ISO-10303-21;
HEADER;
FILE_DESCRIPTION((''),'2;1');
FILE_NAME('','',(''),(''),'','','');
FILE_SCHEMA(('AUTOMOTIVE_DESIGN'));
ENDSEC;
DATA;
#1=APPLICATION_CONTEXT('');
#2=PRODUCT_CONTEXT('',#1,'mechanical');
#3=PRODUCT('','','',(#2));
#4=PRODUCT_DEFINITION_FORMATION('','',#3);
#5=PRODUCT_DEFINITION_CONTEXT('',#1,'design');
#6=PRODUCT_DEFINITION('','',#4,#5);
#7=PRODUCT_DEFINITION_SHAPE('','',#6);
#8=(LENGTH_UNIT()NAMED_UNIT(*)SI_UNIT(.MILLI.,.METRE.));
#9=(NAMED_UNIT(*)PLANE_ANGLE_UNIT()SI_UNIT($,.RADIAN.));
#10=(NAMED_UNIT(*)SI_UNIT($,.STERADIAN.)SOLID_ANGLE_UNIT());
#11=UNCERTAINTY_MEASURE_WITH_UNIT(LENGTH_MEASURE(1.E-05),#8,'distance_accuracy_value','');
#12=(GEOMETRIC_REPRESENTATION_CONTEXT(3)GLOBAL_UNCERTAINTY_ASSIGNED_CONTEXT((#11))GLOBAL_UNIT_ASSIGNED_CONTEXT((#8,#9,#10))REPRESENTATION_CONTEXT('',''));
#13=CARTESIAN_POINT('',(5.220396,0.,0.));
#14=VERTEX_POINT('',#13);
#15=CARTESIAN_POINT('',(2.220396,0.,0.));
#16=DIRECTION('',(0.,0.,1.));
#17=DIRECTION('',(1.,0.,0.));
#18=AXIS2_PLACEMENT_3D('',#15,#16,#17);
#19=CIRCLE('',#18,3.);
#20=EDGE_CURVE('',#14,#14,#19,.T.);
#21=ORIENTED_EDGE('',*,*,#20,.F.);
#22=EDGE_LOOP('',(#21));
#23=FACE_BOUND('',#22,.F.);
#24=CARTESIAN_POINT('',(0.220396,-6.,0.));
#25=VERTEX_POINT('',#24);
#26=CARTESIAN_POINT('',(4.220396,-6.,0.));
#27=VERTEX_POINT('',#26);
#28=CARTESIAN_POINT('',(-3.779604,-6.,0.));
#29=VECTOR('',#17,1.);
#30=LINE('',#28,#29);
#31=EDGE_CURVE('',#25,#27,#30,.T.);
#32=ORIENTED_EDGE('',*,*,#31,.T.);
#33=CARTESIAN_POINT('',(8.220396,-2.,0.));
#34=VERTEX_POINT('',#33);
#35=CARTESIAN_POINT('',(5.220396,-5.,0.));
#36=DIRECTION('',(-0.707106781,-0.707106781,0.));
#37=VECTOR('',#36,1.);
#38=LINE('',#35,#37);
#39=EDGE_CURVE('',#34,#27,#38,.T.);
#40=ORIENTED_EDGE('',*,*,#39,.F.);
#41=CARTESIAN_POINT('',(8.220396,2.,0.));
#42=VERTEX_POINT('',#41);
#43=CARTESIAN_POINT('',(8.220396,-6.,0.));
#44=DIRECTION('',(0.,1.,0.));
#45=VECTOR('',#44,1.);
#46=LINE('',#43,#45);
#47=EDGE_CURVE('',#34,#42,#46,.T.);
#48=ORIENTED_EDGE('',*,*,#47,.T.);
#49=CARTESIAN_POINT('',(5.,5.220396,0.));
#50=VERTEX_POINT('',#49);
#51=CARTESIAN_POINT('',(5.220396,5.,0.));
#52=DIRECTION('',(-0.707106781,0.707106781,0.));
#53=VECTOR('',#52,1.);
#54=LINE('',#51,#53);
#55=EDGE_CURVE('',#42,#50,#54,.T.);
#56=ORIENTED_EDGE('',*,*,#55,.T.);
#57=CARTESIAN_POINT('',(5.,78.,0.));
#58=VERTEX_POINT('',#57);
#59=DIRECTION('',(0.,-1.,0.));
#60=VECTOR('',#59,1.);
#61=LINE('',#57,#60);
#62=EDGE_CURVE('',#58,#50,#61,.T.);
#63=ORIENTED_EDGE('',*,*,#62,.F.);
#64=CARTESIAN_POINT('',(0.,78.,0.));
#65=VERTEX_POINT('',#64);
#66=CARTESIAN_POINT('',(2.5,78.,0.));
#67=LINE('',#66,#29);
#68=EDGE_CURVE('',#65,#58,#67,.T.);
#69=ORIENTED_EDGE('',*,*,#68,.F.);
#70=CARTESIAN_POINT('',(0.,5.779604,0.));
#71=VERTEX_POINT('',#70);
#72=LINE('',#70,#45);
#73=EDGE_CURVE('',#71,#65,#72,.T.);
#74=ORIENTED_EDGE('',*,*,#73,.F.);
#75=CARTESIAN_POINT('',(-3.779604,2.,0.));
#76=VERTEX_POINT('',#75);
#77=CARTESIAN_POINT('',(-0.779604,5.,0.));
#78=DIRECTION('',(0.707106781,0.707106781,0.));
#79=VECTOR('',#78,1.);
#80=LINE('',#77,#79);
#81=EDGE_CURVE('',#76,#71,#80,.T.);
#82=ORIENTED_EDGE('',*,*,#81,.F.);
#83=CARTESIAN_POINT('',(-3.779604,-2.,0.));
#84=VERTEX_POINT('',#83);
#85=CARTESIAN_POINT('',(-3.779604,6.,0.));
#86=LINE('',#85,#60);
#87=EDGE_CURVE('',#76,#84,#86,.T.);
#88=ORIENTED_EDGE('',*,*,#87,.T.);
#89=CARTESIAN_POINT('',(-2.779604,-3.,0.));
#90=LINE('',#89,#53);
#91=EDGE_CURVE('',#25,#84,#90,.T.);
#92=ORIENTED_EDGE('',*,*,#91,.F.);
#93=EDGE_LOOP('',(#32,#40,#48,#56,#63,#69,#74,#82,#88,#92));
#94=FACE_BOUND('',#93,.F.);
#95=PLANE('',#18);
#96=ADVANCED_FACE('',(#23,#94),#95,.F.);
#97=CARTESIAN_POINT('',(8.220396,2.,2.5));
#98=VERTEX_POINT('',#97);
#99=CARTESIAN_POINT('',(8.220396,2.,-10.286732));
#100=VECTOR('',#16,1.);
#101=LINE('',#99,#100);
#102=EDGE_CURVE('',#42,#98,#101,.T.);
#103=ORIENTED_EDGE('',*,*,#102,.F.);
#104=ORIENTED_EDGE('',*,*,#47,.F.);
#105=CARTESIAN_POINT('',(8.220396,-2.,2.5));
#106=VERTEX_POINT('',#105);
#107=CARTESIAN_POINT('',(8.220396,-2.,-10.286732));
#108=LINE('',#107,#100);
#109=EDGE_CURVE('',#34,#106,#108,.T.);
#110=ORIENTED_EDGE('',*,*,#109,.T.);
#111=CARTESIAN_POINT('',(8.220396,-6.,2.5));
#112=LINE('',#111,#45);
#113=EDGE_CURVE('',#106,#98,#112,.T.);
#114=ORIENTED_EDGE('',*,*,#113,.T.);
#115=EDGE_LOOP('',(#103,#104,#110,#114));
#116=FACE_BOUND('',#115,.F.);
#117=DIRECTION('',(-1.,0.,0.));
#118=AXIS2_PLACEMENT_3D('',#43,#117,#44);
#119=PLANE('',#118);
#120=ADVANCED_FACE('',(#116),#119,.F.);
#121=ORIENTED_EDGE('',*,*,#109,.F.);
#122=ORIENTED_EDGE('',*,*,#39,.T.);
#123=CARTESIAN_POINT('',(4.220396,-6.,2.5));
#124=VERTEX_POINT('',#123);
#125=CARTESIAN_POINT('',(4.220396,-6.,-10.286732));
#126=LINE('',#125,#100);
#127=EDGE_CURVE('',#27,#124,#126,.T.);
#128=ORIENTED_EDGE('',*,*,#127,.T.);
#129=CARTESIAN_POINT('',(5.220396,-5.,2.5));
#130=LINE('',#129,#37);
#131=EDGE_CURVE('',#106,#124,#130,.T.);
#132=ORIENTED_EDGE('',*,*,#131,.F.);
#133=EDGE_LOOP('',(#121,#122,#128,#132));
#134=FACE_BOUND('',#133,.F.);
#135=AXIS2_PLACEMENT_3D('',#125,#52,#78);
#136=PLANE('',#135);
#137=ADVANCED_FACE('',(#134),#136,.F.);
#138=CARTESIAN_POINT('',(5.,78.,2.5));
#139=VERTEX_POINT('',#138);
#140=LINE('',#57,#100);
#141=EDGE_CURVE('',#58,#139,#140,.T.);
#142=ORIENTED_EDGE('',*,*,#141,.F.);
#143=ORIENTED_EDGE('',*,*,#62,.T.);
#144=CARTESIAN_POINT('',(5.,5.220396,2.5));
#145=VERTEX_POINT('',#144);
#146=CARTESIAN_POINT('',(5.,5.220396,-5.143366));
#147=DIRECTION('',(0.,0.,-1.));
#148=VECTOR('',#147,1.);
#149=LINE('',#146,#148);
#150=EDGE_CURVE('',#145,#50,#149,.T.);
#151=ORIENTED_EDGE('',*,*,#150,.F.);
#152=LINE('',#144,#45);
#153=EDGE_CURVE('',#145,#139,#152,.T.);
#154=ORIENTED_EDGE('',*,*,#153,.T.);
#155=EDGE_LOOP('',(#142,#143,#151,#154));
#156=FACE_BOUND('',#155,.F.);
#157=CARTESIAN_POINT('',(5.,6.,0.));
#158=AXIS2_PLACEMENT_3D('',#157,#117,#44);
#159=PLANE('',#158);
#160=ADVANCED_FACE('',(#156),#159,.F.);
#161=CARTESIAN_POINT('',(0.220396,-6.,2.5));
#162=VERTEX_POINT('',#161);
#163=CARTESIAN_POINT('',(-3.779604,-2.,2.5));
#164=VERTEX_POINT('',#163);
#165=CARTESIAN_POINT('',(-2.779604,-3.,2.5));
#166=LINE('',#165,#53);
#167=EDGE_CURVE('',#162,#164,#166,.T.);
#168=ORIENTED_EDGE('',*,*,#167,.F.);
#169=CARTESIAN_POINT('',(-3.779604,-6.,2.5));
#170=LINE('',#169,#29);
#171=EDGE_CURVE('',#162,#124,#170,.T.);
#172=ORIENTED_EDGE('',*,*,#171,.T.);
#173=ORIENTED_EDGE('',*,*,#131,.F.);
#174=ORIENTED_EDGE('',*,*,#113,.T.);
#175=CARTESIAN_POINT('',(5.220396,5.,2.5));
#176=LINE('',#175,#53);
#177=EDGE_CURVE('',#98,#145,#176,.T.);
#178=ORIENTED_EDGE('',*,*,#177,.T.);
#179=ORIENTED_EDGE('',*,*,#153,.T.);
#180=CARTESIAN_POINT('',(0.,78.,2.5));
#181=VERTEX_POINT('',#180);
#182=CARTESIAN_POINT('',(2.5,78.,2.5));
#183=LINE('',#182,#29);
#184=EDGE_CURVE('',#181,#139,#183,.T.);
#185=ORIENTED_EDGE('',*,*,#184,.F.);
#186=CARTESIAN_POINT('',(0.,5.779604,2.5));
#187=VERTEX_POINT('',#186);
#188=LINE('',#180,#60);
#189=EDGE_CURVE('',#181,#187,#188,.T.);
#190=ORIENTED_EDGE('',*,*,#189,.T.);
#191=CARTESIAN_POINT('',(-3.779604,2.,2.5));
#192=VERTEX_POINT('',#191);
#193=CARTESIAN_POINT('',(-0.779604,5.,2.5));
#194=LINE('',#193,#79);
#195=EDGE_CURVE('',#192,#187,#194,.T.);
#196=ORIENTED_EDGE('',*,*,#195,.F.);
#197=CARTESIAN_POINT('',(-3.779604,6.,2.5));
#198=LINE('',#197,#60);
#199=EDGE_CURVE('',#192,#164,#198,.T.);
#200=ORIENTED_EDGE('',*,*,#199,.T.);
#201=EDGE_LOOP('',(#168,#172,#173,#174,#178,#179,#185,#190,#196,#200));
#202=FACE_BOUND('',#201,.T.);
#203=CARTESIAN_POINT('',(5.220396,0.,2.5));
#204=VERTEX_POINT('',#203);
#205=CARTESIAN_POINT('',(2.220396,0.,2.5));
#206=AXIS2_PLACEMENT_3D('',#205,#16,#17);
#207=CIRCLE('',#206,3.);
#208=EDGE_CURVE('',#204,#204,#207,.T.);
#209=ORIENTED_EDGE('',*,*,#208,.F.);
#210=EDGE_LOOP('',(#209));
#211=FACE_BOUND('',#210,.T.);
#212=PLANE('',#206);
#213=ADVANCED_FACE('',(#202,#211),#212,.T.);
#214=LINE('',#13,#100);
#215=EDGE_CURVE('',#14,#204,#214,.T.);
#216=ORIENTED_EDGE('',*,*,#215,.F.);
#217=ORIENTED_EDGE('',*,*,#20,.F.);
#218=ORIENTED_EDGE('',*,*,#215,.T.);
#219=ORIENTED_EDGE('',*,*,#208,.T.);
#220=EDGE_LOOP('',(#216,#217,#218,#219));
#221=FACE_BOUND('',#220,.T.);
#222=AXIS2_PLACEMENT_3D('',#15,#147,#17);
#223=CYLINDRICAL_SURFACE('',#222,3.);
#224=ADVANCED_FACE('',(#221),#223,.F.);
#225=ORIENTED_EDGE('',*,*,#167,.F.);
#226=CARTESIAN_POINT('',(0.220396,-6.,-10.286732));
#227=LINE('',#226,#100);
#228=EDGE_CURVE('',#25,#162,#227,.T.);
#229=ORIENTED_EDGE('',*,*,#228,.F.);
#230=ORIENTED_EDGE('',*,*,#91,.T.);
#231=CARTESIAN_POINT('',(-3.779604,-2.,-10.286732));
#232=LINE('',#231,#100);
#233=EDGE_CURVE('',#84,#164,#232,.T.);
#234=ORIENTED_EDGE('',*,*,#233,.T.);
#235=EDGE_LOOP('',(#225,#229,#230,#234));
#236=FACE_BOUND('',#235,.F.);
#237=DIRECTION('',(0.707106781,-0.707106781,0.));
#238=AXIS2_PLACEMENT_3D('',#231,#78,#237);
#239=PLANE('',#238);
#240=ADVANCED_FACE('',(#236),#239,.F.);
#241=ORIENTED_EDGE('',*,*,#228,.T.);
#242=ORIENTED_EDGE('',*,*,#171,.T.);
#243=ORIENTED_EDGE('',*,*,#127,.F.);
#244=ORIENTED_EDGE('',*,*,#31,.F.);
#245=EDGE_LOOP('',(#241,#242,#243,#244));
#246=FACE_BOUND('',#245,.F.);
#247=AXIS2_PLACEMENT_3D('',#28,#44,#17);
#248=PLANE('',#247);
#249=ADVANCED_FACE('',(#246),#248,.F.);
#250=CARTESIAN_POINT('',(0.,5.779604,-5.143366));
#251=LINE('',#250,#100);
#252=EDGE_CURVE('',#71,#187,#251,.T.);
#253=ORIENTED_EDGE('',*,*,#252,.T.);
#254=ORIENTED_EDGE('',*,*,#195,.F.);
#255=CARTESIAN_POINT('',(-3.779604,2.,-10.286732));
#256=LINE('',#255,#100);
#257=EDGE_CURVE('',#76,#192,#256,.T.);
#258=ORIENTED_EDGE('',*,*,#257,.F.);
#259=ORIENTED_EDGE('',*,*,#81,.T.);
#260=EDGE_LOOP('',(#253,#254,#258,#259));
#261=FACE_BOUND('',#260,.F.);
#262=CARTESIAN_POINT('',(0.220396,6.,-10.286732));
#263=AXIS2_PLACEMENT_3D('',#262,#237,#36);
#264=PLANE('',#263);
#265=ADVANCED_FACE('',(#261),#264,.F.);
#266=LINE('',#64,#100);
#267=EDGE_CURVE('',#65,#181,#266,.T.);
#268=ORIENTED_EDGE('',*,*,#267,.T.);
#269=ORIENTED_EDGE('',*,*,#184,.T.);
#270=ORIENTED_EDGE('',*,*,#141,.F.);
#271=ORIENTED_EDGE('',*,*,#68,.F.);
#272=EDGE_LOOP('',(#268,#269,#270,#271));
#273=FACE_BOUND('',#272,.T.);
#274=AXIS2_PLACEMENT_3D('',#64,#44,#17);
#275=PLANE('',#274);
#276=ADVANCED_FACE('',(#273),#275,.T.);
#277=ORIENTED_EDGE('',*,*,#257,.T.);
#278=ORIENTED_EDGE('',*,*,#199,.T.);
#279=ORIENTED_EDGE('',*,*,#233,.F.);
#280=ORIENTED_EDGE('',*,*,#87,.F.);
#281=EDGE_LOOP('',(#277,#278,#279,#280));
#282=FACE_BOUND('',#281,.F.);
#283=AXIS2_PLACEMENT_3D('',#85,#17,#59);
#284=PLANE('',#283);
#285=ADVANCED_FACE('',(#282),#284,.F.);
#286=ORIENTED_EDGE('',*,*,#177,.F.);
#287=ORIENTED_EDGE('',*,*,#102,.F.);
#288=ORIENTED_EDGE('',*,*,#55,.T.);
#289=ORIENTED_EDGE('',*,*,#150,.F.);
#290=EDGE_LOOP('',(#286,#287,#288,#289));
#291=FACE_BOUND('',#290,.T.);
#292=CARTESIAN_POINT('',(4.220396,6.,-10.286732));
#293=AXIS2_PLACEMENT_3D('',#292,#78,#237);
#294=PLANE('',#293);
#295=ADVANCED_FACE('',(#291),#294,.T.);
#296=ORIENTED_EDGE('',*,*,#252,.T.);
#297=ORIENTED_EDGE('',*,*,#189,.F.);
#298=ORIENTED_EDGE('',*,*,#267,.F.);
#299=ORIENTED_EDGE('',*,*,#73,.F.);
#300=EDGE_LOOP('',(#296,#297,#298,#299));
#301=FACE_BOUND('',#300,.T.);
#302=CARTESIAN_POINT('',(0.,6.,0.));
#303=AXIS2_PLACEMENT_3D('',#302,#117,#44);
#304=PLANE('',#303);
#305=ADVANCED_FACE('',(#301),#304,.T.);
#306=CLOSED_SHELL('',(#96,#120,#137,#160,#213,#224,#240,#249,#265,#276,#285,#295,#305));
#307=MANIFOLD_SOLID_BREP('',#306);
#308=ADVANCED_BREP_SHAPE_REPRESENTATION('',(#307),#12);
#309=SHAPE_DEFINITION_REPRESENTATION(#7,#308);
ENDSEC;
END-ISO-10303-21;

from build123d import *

# Parameters (mm, degrees)
F0_R         = 3
F0_W         = 5
F0_H         = 72
F1_DEPTH     = 2.5
F2_T1_DEPTH  = 23.0734639037
F2_T6_DEPTH  = 23.0734639037
F2_T11_DEPTH = 23.0734639037


# Not quite as in the source:
# - a fillet or chamfer that OpenCascade refuses, or shapes differently, is made with other operations: its cross-section is extruded or revolved along the edge and cut away or added


with BuildPart() as f1:
    # F0 (on Top) → F1 (new body)
    with BuildSketch(Plane.XY):
        Polygon((5, 6), (0, 6), (-3.7796038147, 6), (-3.7796038147, -6), (8.2203961853, -6), (8.2203961853, 6), align=None)
        with Locations((2.2203961853, 0)):
            Circle(F0_R, mode=Mode.SUBTRACT)
        with Locations((2.5, 42)):
            Rectangle(F0_W, F0_H)
    extrude(amount=F1_DEPTH)

    # F2: chamfer of 4 on 4 edges, made by hand

    # F2_s2 → F2_t1 (cut)
    with BuildSketch(Plane.XY.offset(-10.2867319519)):
        Polygon((4.2203961853, -6), (8.2203961853, -2), (8.2203961853, -6), align=None)
        Polygon((-3.7796038147, -2), (0.2203961853, -6), (-3.7796038147, -6), align=None)
    extrude(amount=F2_T1_DEPTH, mode=Mode.SUBTRACT)


with BuildPart() as f2_tool4:
    # F2_s5 → F2_t6 (new body)
    with BuildSketch(Plane.XY.offset(-10.2867319519)):
        Polygon((0.2203961853, 6), (-3.7796038147, 2), (-3.7796038147, 6), align=None)
    extrude(amount=F2_T6_DEPTH)

    split(bisect_by=Plane.YZ, keep=Keep.BOTTOM)


with BuildPart() as f1_1:
    add(f1.part)

    # F2_t3: cut F2_tool4
    add(f2_tool4.part, mode=Mode.SUBTRACT)


with BuildPart() as f2_tool9:
    # F2_s10 → F2_t11 (new body)
    with BuildSketch(Plane.XY.offset(-10.2867319519)):
        Polygon((4.2203961853, 6), (8.2203961853, 2), (8.2203961853, 6), align=None)
    extrude(amount=F2_T11_DEPTH)

    split(bisect_by=Plane.YZ.offset(5), keep=Keep.TOP)


with BuildPart() as f1_2:
    add(f1_1.part)

    # F2_t8: cut F2_tool9
    add(f2_tool9.part, mode=Mode.SUBTRACT)


solid = f1_2.part
